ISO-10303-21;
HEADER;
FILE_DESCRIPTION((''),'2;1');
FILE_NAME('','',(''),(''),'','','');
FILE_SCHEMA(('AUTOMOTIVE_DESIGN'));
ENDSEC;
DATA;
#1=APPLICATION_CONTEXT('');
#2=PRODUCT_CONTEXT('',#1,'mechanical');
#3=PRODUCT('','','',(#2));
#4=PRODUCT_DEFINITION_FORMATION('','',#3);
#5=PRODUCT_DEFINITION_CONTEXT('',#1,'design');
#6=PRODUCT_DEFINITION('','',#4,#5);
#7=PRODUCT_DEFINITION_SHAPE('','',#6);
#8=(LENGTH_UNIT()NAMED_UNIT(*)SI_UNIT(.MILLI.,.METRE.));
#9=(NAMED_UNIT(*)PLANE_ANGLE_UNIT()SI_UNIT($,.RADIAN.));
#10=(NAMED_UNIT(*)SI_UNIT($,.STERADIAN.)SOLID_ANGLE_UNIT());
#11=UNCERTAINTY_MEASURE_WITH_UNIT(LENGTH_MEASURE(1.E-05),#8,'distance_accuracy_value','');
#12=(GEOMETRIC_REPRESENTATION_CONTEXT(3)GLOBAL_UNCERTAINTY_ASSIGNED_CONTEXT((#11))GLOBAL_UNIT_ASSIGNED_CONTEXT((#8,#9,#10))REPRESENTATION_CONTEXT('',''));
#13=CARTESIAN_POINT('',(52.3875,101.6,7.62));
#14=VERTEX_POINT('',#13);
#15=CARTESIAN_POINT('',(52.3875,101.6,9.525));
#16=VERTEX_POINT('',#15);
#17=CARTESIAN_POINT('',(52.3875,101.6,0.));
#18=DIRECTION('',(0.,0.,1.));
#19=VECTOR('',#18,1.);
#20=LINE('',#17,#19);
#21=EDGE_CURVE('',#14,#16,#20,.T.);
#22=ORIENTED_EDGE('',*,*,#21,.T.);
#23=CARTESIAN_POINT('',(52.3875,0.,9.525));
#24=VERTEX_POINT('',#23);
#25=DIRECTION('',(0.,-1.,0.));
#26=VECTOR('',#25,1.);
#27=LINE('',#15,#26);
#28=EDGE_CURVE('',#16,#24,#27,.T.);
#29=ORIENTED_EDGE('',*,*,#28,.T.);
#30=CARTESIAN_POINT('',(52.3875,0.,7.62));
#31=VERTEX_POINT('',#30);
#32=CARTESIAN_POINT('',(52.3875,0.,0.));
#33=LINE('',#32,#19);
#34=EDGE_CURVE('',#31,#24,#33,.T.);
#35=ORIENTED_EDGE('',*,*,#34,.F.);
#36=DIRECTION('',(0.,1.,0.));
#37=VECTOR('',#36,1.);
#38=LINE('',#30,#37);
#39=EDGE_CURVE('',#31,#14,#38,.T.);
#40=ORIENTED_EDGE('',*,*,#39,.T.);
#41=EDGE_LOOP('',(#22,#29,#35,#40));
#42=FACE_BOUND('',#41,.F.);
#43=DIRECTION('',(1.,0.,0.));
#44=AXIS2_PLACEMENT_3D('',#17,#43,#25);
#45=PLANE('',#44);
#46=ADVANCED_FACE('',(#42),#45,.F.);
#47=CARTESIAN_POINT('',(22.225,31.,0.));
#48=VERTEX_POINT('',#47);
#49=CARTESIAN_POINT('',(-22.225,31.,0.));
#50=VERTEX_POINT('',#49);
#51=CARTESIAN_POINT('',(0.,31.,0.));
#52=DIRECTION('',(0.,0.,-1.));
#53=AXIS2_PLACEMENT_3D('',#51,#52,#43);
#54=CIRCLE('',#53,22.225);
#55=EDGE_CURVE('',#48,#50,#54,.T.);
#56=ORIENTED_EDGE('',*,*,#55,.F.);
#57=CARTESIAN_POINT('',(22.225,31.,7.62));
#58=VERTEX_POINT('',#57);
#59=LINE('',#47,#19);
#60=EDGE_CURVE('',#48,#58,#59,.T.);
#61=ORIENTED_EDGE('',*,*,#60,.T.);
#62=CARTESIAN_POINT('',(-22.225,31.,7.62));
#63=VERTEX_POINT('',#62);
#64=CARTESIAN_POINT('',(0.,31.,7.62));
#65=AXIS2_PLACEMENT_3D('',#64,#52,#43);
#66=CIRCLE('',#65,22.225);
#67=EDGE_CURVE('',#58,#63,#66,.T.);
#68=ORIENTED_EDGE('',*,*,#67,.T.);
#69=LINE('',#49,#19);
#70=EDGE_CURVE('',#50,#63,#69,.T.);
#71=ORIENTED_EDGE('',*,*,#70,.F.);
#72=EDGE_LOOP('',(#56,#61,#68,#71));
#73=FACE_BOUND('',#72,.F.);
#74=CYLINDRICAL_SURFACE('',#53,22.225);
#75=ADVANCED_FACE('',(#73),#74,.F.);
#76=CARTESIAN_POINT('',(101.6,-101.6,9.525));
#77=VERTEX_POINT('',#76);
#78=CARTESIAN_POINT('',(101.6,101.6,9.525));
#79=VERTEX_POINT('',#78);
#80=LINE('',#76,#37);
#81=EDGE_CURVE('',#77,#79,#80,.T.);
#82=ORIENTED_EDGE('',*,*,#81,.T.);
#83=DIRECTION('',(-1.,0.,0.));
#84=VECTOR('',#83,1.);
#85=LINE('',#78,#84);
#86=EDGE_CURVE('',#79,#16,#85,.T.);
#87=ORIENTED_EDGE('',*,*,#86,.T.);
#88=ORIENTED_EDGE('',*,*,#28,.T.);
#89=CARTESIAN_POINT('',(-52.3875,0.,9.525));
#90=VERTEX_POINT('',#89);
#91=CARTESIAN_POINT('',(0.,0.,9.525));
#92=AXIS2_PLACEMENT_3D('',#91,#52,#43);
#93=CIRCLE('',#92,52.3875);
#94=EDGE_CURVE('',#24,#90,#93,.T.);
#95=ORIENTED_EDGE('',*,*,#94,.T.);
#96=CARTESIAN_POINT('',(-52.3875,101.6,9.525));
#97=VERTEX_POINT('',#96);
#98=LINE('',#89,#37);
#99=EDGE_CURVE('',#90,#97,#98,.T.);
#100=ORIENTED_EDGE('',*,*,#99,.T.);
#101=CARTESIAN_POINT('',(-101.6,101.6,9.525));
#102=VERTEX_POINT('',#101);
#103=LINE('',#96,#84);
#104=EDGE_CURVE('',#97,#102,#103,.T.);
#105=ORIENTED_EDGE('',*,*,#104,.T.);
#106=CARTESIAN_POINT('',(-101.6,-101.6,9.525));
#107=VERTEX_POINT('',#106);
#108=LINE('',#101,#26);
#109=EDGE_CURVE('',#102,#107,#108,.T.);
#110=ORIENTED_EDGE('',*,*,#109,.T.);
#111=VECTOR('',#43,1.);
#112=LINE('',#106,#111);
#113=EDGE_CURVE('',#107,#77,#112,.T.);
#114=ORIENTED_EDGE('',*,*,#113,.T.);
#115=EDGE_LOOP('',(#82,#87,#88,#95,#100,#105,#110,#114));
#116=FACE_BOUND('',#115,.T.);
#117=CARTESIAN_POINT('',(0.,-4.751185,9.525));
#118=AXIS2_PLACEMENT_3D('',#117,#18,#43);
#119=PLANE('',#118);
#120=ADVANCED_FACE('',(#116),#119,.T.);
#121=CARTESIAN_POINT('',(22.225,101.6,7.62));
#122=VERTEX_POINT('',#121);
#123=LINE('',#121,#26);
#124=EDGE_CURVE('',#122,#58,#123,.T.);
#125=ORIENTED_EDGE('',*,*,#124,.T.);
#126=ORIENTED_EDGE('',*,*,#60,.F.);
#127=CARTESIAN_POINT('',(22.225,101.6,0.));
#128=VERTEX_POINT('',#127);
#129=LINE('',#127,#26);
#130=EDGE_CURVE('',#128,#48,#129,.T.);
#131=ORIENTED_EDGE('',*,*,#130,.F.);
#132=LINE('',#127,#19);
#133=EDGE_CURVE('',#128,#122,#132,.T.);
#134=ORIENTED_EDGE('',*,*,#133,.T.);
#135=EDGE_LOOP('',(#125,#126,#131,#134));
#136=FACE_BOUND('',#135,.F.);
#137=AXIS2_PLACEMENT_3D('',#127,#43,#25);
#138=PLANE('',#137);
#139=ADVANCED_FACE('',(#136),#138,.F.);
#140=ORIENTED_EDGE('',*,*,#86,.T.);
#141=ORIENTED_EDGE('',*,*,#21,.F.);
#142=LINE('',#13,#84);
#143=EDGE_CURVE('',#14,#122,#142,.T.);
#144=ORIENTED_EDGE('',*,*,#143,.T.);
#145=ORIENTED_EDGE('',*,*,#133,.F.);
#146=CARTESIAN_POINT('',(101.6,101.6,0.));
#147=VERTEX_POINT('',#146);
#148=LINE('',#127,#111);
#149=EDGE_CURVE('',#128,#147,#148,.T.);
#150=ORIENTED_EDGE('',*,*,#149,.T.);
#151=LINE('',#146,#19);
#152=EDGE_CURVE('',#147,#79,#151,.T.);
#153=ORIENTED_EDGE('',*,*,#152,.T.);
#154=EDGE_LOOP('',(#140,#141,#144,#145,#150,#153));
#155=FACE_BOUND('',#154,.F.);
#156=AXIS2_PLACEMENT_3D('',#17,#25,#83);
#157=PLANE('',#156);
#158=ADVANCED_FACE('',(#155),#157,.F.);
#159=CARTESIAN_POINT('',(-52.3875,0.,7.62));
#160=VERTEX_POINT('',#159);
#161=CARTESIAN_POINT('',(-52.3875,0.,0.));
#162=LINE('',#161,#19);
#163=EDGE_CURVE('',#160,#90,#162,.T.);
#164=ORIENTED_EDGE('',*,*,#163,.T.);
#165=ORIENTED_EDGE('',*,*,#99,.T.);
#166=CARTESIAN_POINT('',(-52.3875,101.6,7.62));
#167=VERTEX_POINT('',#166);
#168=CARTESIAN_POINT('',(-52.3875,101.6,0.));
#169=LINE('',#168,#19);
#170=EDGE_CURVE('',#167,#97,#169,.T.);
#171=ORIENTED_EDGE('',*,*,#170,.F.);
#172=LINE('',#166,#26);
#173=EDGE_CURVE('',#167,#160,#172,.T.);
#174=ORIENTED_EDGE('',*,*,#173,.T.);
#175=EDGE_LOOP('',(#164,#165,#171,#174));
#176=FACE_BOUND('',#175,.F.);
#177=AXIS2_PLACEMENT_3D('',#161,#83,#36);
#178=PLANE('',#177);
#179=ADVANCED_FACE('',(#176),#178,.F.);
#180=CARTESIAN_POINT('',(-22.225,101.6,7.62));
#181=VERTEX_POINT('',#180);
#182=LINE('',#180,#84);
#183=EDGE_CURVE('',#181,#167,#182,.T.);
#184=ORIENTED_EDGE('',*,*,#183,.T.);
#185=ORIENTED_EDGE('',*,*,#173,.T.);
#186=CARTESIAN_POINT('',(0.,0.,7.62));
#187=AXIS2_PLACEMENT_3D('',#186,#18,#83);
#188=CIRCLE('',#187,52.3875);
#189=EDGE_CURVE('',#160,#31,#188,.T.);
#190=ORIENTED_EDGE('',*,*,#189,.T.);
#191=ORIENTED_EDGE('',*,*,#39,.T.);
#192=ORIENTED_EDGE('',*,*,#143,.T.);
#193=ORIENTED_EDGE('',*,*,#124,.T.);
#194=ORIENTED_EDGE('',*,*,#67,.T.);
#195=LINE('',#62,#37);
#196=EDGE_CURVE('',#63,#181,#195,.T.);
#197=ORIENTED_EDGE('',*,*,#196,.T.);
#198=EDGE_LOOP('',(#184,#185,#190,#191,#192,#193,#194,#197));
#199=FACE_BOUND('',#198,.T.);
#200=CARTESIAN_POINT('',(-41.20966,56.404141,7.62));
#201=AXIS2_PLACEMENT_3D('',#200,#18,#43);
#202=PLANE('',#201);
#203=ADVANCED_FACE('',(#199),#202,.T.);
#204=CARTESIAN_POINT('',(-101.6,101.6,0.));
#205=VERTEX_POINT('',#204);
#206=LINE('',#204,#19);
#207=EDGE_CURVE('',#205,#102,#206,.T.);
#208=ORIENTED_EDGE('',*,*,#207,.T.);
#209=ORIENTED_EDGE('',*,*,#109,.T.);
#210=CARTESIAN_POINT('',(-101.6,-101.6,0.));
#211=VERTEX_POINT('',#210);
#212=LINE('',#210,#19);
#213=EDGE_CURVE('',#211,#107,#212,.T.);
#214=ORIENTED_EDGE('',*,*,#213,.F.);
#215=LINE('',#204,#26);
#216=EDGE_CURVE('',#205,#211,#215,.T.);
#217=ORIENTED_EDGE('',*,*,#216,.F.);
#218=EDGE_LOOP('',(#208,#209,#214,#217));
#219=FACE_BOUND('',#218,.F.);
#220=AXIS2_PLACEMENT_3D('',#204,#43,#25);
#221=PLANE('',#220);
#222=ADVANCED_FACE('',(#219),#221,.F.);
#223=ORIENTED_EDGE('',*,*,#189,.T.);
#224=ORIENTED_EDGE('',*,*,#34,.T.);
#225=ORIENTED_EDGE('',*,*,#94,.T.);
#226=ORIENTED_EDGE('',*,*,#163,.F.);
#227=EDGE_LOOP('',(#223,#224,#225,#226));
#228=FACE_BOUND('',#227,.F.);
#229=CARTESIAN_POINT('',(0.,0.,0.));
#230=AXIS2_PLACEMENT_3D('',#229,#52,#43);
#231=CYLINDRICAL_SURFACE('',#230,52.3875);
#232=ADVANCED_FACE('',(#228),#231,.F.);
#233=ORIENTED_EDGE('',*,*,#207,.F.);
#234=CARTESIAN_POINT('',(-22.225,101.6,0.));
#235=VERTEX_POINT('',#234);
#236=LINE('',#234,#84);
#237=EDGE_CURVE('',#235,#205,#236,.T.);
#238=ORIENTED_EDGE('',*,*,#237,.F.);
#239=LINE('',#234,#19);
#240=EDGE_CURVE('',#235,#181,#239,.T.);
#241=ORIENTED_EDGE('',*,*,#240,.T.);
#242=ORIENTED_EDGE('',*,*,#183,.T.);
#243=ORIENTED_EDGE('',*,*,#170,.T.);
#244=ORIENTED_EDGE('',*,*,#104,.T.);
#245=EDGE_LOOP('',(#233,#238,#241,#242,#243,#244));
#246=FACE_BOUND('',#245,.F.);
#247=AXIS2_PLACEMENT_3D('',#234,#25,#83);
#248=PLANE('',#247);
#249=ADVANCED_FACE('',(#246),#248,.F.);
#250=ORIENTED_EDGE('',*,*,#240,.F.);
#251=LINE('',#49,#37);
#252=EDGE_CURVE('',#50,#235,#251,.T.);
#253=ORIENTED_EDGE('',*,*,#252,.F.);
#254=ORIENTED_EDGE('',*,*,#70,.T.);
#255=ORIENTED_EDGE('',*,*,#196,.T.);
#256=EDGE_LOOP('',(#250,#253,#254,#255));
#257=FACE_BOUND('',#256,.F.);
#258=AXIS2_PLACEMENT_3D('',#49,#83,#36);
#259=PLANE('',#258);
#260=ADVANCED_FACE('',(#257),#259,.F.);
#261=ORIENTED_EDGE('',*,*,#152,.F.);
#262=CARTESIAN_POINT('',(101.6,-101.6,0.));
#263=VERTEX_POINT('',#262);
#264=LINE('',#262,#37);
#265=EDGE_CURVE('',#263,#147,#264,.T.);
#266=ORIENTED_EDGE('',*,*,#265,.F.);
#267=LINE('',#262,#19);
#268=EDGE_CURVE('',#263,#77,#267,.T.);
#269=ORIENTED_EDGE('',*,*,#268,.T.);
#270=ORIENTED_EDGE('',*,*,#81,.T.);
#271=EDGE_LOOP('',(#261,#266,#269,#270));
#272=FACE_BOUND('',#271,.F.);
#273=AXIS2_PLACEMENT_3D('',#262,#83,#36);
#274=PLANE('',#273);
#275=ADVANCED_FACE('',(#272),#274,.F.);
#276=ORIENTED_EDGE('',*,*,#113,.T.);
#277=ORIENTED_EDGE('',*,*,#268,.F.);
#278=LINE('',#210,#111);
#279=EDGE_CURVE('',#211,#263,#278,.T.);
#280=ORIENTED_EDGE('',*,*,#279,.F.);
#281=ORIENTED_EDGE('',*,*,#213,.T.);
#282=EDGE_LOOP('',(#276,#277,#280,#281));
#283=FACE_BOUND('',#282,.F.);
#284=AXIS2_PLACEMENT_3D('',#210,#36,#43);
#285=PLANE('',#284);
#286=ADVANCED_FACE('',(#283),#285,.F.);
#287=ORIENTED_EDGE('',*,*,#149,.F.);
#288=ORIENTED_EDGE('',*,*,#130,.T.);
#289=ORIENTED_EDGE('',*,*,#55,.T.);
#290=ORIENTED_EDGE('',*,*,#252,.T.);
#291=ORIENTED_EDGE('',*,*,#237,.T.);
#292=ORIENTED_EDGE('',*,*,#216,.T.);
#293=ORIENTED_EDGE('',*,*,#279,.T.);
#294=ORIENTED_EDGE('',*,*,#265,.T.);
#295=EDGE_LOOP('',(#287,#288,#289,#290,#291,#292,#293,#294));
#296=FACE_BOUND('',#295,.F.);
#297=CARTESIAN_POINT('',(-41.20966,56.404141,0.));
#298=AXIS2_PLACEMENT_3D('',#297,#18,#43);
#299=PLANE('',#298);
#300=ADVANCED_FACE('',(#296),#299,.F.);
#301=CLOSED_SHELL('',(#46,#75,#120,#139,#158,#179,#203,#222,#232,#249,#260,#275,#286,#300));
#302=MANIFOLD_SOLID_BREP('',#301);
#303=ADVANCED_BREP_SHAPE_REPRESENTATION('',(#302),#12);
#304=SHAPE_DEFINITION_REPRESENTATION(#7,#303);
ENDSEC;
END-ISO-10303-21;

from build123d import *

# Parameters (mm, degrees)
F1_DEPTH = 9.525
F2_DEPTH = 7.62


# Not quite as in the source:
# - a feature names something its author has since deleted; it is built from what else it names


with BuildPart() as f1:
    # F0 (on Top) → F1 (new body)
    with BuildSketch(Plane.XY):
        with BuildLine():
            Line((-101.6, 101.6), (-101.6, -101.6))
            Line((-101.6, -101.6), (101.6, -101.6))
            Line((101.6, -101.6), (101.6, 101.6))
            Line((101.6, 101.6), (52.3875, 101.6))
            Line((52.3875, 101.6), (52.3875, 0))
            ThreePointArc((52.3875, 0), (0, -52.3875), (-52.3875, 0))
            Line((-52.3875, 0), (-52.3875, 101.6))
            Line((-52.3875, 101.6), (-101.6, 101.6))
        make_face()
    extrude(amount=F1_DEPTH)

    # F0 (on Top) → F2 (join)
    with BuildSketch(Plane.XY):
        with BuildLine():
            Line((-22.225, 101.6), (-52.3875, 101.6))
            Line((-52.3875, 101.6), (-52.3875, 0))
            ThreePointArc((-52.3875, 0), (-44.2083835022, 28.1081657953), (-22.225, 47.439430132))
            Line((-22.225, 47.439430132), (-22.225, 101.6))
        make_face()
        with BuildLine():
            Line((52.3875, 0), (52.3875, 101.6))
            Line((52.3875, 101.6), (22.225, 101.6))
            Line((22.225, 101.6), (22.225, 47.439430132))
            ThreePointArc((22.225, 47.439430132), (44.2083835022, 28.1081657953), (52.3875, 0))
        make_face()
        with BuildLine():
            ThreePointArc((-22.225, 47.439430132), (-44.2083835022, 28.1081657953), (-52.3875, 0))
            ThreePointArc((-52.3875, 0), (0, -52.3875), (52.3875, 0))
            ThreePointArc((52.3875, 0), (44.2083835022, 28.1081657953), (22.225, 47.439430132))
            Line((22.225, 47.439430132), (22.225, 31))
            ThreePointArc((22.225, 31), (0, 8.775), (-22.225, 31))
            Line((-22.225, 31), (-22.225, 47.439430132))
        make_face()
    extrude(amount=F2_DEPTH)


solid = f1.part
